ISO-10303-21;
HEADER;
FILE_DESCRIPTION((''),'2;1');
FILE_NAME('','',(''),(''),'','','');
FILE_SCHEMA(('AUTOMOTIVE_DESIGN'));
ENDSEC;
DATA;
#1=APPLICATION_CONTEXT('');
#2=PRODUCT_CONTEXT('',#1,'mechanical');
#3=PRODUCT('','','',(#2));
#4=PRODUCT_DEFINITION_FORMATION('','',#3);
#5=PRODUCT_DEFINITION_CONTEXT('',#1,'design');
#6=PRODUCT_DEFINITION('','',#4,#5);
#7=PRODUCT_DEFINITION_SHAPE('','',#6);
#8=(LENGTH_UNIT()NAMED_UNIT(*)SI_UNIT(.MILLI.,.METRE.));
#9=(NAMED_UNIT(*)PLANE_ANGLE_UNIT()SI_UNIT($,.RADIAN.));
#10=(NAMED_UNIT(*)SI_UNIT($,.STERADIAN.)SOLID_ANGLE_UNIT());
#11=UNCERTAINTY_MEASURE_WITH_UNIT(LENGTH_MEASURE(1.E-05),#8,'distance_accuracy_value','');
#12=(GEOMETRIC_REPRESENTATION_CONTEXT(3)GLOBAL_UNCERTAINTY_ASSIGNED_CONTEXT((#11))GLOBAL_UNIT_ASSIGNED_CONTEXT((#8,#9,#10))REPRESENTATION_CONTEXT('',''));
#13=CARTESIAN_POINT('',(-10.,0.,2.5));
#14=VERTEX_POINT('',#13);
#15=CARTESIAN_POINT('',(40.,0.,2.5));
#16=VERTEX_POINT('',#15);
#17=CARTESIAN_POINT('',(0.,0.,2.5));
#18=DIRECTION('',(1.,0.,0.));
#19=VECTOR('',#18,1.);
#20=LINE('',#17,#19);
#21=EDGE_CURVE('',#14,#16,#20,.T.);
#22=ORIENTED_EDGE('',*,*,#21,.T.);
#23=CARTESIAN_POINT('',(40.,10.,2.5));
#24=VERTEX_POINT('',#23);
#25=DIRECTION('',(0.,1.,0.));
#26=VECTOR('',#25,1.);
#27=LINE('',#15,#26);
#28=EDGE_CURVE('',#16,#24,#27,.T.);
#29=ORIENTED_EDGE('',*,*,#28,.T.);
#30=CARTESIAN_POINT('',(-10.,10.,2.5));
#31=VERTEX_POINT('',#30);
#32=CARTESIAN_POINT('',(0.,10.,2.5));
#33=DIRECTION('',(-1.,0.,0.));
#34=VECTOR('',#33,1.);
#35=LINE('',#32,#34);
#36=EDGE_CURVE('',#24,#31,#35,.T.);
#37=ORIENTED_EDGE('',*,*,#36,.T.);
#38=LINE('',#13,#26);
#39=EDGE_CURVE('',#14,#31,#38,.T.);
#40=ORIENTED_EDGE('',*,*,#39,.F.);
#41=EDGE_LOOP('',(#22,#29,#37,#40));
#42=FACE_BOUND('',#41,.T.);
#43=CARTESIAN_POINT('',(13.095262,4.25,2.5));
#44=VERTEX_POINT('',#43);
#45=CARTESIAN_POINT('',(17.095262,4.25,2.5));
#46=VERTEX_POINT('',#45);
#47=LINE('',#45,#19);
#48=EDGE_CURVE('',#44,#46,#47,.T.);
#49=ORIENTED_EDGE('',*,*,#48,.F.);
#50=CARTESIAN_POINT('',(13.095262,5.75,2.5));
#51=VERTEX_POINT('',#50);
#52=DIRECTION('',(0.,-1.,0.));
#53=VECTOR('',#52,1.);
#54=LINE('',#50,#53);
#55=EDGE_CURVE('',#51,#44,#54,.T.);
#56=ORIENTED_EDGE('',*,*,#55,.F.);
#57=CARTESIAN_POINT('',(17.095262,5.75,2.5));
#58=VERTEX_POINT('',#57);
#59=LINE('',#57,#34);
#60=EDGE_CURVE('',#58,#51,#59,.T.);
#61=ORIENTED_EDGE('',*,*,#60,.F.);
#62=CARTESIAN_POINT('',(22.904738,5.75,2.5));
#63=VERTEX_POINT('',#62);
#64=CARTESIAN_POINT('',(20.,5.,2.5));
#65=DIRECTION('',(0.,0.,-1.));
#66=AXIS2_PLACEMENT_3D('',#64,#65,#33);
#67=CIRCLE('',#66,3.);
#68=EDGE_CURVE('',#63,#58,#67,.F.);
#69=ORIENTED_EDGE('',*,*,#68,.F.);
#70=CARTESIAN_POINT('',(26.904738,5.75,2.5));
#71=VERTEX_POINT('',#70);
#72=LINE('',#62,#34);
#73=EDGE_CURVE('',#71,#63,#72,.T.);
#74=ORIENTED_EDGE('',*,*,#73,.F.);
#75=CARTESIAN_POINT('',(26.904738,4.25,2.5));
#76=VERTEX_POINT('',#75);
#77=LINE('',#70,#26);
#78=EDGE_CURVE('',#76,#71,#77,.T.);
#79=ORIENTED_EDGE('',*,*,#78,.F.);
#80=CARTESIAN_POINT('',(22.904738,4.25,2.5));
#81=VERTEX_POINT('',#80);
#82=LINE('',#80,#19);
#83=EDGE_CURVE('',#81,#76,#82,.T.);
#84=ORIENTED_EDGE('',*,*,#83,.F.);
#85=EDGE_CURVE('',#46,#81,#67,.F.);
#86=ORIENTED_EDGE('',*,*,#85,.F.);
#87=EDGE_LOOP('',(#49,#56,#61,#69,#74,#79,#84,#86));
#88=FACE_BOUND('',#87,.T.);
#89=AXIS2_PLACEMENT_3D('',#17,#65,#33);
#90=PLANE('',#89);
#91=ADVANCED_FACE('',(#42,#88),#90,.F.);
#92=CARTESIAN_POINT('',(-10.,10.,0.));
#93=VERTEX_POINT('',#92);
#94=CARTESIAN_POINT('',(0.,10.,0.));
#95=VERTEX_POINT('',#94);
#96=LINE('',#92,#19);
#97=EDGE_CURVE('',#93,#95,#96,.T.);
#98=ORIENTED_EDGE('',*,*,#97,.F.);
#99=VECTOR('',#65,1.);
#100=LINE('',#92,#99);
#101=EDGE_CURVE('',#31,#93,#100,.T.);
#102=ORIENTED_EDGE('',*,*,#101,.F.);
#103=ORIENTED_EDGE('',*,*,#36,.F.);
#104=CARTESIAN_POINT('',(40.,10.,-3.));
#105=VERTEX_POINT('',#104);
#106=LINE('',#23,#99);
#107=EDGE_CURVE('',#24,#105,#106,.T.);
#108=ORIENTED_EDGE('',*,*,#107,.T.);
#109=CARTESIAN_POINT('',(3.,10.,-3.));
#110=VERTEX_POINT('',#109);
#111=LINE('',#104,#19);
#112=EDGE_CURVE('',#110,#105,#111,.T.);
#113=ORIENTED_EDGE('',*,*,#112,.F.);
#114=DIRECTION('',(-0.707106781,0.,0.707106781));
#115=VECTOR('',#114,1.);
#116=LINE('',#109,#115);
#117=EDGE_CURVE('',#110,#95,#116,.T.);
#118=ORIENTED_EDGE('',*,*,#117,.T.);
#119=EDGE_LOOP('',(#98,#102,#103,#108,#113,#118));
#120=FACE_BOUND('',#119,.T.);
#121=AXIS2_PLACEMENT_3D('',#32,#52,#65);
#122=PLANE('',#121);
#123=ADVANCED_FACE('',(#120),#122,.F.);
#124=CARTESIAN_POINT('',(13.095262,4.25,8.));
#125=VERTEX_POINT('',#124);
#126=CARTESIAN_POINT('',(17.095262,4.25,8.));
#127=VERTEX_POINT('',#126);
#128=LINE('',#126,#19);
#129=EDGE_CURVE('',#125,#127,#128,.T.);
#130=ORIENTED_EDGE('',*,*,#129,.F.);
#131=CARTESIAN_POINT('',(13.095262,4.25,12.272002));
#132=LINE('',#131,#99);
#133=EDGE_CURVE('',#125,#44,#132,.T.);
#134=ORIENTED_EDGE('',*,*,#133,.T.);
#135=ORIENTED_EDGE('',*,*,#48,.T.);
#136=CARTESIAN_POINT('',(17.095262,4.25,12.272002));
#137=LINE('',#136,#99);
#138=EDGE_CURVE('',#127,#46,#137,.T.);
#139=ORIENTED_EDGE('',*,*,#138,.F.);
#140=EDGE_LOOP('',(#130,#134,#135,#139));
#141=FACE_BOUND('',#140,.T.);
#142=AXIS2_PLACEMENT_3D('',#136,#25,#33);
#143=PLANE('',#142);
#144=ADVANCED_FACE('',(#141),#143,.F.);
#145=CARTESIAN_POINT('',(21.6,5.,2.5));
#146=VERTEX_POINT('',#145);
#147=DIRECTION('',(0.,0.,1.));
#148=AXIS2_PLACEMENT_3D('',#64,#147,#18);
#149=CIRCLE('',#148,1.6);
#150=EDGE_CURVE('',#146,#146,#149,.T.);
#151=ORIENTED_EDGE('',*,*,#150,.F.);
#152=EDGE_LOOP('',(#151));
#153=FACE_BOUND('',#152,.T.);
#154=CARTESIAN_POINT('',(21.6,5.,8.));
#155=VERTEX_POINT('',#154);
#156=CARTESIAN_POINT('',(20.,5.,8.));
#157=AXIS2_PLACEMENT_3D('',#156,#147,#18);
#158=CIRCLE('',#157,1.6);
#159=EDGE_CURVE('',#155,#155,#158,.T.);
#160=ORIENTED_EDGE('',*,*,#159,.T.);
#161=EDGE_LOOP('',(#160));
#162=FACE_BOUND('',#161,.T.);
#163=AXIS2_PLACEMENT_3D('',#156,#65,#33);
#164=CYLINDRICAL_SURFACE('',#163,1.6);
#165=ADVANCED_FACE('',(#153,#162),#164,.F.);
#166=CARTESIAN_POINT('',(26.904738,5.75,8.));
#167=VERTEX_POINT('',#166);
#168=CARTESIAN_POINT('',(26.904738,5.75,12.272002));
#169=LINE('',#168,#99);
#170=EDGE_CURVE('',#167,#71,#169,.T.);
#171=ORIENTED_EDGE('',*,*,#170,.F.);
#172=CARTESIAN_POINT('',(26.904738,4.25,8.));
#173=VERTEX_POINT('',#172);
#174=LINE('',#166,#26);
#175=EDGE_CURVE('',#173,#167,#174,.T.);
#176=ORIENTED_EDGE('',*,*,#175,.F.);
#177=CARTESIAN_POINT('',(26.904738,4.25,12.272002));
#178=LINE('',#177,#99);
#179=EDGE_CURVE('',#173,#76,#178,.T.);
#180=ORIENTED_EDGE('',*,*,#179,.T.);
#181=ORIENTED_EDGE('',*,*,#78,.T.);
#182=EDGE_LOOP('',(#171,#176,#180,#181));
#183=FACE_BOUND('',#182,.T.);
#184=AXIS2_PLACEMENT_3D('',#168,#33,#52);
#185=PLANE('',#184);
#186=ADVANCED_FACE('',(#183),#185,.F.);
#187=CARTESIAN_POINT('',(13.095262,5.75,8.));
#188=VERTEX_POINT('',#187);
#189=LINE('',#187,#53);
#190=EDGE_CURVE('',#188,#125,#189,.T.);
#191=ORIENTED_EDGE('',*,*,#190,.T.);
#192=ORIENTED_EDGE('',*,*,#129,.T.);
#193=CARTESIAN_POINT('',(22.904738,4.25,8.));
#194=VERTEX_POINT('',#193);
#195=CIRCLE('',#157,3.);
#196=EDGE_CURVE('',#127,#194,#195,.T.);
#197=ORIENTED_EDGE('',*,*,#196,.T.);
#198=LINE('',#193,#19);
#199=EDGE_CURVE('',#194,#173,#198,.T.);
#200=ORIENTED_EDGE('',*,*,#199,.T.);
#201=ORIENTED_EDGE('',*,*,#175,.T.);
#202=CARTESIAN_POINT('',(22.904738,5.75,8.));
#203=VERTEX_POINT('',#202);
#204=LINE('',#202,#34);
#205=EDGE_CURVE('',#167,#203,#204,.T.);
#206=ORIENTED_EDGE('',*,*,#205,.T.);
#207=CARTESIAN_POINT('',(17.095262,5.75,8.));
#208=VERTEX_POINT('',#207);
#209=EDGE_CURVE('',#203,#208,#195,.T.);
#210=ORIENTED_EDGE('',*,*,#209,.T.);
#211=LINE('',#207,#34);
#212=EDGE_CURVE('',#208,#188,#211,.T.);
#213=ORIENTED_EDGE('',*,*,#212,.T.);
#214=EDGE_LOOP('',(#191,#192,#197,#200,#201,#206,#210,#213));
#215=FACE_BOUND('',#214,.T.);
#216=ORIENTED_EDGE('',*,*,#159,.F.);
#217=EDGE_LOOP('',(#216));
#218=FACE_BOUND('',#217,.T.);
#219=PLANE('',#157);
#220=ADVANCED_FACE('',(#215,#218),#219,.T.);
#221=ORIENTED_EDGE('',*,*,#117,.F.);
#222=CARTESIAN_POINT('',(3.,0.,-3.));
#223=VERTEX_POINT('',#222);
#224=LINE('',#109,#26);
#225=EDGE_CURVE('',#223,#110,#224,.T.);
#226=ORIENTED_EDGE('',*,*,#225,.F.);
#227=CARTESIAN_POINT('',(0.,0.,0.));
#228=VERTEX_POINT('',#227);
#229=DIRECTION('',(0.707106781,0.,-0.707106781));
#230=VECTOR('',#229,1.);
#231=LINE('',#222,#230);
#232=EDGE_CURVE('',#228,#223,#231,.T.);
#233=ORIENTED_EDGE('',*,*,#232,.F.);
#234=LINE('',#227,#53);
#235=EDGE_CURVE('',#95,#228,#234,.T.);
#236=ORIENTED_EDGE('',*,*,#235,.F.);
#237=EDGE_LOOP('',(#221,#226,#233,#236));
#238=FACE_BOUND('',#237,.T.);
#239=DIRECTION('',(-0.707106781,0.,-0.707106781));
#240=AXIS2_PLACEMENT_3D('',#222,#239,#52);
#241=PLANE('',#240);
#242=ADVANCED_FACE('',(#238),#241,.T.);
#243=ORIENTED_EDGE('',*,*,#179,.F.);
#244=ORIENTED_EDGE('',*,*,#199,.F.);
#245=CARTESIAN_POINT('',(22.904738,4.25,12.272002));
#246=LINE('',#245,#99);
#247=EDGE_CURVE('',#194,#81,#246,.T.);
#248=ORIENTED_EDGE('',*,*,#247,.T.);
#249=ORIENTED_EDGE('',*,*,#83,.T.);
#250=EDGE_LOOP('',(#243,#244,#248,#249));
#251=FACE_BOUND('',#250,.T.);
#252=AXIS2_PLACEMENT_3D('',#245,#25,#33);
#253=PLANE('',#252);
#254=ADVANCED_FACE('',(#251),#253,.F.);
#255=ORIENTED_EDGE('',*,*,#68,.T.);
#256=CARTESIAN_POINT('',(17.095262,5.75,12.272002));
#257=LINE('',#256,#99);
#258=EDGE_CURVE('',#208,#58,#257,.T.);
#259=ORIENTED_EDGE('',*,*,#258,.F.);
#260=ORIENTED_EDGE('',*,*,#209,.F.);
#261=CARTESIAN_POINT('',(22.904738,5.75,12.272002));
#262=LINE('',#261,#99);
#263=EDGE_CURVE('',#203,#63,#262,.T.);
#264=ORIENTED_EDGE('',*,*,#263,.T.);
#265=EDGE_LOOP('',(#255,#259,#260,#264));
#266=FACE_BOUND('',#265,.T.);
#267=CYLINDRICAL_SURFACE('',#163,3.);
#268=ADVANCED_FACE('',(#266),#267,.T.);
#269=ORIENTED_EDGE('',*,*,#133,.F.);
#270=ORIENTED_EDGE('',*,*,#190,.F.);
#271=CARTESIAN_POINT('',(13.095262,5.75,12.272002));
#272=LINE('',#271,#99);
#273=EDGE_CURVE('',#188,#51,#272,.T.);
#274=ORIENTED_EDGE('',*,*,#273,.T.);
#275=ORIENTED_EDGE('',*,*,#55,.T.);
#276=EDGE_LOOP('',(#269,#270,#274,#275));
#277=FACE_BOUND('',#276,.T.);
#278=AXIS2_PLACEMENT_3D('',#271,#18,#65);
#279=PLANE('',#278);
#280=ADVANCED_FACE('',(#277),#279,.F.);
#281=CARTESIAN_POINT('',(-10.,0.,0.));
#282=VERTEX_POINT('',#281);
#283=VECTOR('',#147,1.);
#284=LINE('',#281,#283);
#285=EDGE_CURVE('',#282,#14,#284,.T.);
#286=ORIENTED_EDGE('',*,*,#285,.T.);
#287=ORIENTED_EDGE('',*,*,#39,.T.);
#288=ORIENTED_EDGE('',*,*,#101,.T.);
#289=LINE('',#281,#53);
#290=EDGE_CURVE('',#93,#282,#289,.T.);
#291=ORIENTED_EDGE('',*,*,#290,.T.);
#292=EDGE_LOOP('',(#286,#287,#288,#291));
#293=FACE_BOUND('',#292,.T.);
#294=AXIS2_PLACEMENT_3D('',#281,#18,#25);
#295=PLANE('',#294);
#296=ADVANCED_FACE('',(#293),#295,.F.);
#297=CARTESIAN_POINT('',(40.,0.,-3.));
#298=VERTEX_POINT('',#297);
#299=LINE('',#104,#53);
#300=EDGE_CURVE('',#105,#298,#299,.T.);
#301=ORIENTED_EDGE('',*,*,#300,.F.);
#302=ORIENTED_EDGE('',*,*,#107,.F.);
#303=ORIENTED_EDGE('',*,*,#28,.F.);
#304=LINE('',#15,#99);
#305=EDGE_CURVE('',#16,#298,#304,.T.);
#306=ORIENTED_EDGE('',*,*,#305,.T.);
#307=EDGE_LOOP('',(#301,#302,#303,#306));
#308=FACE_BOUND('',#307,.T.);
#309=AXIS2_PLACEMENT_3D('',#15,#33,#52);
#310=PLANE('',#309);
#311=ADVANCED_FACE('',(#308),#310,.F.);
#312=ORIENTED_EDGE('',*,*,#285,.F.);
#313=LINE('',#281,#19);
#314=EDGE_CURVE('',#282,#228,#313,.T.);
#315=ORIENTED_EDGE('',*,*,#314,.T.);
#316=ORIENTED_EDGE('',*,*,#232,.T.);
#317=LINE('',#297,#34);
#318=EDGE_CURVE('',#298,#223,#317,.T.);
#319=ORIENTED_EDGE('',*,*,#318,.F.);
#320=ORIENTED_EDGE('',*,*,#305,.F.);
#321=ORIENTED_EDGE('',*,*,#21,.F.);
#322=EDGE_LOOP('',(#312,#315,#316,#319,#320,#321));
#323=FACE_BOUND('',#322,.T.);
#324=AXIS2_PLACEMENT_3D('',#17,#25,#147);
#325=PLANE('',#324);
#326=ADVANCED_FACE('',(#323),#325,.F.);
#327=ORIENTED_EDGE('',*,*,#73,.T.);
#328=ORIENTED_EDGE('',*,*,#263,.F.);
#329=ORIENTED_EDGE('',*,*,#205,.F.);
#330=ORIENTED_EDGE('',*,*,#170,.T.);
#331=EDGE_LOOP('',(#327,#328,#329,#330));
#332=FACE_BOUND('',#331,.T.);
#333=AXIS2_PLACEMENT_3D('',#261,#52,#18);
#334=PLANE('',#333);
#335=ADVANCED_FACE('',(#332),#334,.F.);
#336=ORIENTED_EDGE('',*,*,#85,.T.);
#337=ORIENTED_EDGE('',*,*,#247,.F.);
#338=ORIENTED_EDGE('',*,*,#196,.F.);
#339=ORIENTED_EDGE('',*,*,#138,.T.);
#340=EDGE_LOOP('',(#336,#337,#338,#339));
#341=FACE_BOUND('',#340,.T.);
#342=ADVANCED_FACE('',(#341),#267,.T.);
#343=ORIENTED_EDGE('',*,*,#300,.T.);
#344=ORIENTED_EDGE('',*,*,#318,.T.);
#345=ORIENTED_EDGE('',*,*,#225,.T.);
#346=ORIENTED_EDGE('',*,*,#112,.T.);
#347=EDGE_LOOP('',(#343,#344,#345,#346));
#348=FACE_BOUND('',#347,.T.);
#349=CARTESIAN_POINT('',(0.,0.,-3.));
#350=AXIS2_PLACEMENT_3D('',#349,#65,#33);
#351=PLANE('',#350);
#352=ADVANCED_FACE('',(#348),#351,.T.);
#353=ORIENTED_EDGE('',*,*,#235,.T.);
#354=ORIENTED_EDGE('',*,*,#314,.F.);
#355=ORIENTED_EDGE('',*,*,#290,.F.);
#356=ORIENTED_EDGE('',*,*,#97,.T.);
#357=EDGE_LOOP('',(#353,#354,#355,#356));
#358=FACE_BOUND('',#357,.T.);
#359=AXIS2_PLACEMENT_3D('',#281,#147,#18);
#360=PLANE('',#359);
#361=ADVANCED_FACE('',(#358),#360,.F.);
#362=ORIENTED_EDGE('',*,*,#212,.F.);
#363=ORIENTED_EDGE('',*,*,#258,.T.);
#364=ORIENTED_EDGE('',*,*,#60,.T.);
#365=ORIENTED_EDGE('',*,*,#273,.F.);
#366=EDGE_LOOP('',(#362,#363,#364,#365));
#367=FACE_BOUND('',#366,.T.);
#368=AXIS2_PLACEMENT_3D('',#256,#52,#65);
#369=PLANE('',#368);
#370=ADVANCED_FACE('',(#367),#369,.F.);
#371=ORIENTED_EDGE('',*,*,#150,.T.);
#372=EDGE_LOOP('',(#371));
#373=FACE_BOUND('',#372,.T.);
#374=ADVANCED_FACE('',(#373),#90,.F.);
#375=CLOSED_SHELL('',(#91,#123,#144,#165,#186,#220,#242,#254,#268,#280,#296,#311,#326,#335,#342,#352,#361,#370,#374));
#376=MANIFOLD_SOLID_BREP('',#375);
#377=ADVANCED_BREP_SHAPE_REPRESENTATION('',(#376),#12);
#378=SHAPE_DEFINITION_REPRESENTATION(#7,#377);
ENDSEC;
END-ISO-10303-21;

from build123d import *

# Parameters (mm, degrees)
SKETCH_1_W      = 40
SKETCH_1_H      = 10
EXTRUDE_1_DEPTH = 2.5
SKETCH_3_W      = 4
SKETCH_3_H      = 10
EXTRUDE_3_DEPTH = 3
SKETCH_4_W      = 15
SKETCH_4_H      = 1.5
SKETCH_4_W_2    = 3
SKETCH_4_H_2    = 3.5
EXTRUDE_4_DEPTH = 3
CHAMFER_1_SIZE  = 1.5
SKETCH_6_R      = 3
SKETCH_6_R_2    = 1.6
EXTRUDE_5_DEPTH = 5.5
SKETCH_7_W      = 2.5
SKETCH_7_H      = 10
EXTRUDE_6_DEPTH = 10
SKETCH_8_W      = 4
SKETCH_8_H      = 1.5
EXTRUDE_7_DEPTH = 5.5
SKETCH_9_W      = 33
SKETCH_9_H      = 10
EXTRUDE_8_DEPTH = 3
CHAMFER_2_SIZE  = 3


with BuildPart() as part:
    # 草图1 → 凸台-拉伸1 (new body)
    with BuildSketch(Plane.XY):
        with Locations((20, 5)):
            Rectangle(SKETCH_1_W, SKETCH_1_H)
    extrude(amount=EXTRUDE_1_DEPTH)

    # 草图3 → 凸台-拉伸3 (add)
    with BuildSketch(Plane(origin=(0, 0, 0), x_dir=(-1, 0, 0), z_dir=(0, 0, -1))):
        with Locations((-38, 5)):
            Rectangle(SKETCH_3_W, SKETCH_3_H)
    extrude(amount=EXTRUDE_3_DEPTH)

    # 草图4 → 凸台-拉伸4 (add)
    with BuildSketch(Plane(origin=(0, 0, 0), x_dir=(-1, 0, 0), z_dir=(0, 0, -1))):
        with Locations((-28.5, 5.75)):
            Rectangle(SKETCH_4_W, SKETCH_4_H)
        with Locations((-28.5, 4.25)):
            Rectangle(SKETCH_4_W, SKETCH_4_H)
        with Locations((-19.5, 5.75)):
            Rectangle(SKETCH_4_W_2, SKETCH_4_H)
        with Locations((-19.5, 4.25)):
            Rectangle(SKETCH_4_W_2, SKETCH_4_H)
        with Locations((-19.5, 8.25)):
            Rectangle(SKETCH_4_W_2, SKETCH_4_H_2)
        with Locations((-19.5, 1.75)):
            Rectangle(SKETCH_4_W_2, SKETCH_4_H_2)
        with Locations((-10.5, 5.75)):
            Rectangle(SKETCH_4_W, SKETCH_4_H)
        with Locations((-10.5, 4.25)):
            Rectangle(SKETCH_4_W, SKETCH_4_H)
        with Locations((-1.5, 5.75)):
            Rectangle(SKETCH_4_W_2, SKETCH_4_H)
        with Locations((-1.5, 4.25)):
            Rectangle(SKETCH_4_W_2, SKETCH_4_H)
        with Locations((-1.5, 8.25)):
            Rectangle(SKETCH_4_W_2, SKETCH_4_H_2)
        with Locations((-1.5, 1.75)):
            Rectangle(SKETCH_4_W_2, SKETCH_4_H_2)
    extrude(amount=EXTRUDE_4_DEPTH)

    # 倒角1
    chamfer_1_edges = [part.edges().sort_by_distance(p)[0] for p in [
        (10.5, 3.5, 0),
        (28.5, 3.5, 0),
    ]]
    chamfer(chamfer_1_edges, length=CHAMFER_1_SIZE)
    chamfer_1_2_edges = [part.edges().sort_by_distance(p)[0] for p in [
        (10.5, 3.5, -3),
        (28.5, 3.5, -3),
    ]]
    chamfer(chamfer_1_2_edges, length=CHAMFER_1_SIZE - 0.0001)  # a hair under: the kernel refuses the full size

    # 草图6 → 凸台-拉伸5 (add)
    with BuildSketch(Plane.XY.offset(2.5)):
        with Locations(Location((20, 5, 0), (0, 0, 180))):
            Circle(SKETCH_6_R)
        with Locations((20, 5)):
            Circle(SKETCH_6_R_2, mode=Mode.SUBTRACT)
    extrude(amount=EXTRUDE_5_DEPTH)

    # 草图7 → 凸台-拉伸6 (add)
    with BuildSketch(Plane.ZY):
        with Locations((1.25, 5)):
            Rectangle(SKETCH_7_W, SKETCH_7_H)
    extrude(amount=EXTRUDE_6_DEPTH)

    # 草图8 → 凸台-拉伸7 (add)
    with BuildSketch(Plane.XY.offset(2.5)):
        with Locations((15.09526249, 5)):
            Rectangle(SKETCH_8_W, SKETCH_8_H)
        with Locations((24.90473751, 5)):
            Rectangle(SKETCH_8_W, SKETCH_8_H)
    extrude(amount=EXTRUDE_7_DEPTH)

    # 草图9 → 凸台-拉伸8 (add)
    with BuildSketch(Plane(origin=(0, 0, 0), x_dir=(-1, 0, 0), z_dir=(0, 0, -1))):
        with Locations((-19.5, 5)):
            Rectangle(SKETCH_9_W, SKETCH_9_H)
    extrude(amount=EXTRUDE_8_DEPTH)

    # 倒角2
    chamfer_2_edges = [part.edges().sort_by_distance(p)[0] for p in [
        (0, 5, -3),
    ]]
    chamfer(chamfer_2_edges, length=CHAMFER_2_SIZE - 0.0001)  # a hair under: the kernel refuses the full size


solid = part.part
